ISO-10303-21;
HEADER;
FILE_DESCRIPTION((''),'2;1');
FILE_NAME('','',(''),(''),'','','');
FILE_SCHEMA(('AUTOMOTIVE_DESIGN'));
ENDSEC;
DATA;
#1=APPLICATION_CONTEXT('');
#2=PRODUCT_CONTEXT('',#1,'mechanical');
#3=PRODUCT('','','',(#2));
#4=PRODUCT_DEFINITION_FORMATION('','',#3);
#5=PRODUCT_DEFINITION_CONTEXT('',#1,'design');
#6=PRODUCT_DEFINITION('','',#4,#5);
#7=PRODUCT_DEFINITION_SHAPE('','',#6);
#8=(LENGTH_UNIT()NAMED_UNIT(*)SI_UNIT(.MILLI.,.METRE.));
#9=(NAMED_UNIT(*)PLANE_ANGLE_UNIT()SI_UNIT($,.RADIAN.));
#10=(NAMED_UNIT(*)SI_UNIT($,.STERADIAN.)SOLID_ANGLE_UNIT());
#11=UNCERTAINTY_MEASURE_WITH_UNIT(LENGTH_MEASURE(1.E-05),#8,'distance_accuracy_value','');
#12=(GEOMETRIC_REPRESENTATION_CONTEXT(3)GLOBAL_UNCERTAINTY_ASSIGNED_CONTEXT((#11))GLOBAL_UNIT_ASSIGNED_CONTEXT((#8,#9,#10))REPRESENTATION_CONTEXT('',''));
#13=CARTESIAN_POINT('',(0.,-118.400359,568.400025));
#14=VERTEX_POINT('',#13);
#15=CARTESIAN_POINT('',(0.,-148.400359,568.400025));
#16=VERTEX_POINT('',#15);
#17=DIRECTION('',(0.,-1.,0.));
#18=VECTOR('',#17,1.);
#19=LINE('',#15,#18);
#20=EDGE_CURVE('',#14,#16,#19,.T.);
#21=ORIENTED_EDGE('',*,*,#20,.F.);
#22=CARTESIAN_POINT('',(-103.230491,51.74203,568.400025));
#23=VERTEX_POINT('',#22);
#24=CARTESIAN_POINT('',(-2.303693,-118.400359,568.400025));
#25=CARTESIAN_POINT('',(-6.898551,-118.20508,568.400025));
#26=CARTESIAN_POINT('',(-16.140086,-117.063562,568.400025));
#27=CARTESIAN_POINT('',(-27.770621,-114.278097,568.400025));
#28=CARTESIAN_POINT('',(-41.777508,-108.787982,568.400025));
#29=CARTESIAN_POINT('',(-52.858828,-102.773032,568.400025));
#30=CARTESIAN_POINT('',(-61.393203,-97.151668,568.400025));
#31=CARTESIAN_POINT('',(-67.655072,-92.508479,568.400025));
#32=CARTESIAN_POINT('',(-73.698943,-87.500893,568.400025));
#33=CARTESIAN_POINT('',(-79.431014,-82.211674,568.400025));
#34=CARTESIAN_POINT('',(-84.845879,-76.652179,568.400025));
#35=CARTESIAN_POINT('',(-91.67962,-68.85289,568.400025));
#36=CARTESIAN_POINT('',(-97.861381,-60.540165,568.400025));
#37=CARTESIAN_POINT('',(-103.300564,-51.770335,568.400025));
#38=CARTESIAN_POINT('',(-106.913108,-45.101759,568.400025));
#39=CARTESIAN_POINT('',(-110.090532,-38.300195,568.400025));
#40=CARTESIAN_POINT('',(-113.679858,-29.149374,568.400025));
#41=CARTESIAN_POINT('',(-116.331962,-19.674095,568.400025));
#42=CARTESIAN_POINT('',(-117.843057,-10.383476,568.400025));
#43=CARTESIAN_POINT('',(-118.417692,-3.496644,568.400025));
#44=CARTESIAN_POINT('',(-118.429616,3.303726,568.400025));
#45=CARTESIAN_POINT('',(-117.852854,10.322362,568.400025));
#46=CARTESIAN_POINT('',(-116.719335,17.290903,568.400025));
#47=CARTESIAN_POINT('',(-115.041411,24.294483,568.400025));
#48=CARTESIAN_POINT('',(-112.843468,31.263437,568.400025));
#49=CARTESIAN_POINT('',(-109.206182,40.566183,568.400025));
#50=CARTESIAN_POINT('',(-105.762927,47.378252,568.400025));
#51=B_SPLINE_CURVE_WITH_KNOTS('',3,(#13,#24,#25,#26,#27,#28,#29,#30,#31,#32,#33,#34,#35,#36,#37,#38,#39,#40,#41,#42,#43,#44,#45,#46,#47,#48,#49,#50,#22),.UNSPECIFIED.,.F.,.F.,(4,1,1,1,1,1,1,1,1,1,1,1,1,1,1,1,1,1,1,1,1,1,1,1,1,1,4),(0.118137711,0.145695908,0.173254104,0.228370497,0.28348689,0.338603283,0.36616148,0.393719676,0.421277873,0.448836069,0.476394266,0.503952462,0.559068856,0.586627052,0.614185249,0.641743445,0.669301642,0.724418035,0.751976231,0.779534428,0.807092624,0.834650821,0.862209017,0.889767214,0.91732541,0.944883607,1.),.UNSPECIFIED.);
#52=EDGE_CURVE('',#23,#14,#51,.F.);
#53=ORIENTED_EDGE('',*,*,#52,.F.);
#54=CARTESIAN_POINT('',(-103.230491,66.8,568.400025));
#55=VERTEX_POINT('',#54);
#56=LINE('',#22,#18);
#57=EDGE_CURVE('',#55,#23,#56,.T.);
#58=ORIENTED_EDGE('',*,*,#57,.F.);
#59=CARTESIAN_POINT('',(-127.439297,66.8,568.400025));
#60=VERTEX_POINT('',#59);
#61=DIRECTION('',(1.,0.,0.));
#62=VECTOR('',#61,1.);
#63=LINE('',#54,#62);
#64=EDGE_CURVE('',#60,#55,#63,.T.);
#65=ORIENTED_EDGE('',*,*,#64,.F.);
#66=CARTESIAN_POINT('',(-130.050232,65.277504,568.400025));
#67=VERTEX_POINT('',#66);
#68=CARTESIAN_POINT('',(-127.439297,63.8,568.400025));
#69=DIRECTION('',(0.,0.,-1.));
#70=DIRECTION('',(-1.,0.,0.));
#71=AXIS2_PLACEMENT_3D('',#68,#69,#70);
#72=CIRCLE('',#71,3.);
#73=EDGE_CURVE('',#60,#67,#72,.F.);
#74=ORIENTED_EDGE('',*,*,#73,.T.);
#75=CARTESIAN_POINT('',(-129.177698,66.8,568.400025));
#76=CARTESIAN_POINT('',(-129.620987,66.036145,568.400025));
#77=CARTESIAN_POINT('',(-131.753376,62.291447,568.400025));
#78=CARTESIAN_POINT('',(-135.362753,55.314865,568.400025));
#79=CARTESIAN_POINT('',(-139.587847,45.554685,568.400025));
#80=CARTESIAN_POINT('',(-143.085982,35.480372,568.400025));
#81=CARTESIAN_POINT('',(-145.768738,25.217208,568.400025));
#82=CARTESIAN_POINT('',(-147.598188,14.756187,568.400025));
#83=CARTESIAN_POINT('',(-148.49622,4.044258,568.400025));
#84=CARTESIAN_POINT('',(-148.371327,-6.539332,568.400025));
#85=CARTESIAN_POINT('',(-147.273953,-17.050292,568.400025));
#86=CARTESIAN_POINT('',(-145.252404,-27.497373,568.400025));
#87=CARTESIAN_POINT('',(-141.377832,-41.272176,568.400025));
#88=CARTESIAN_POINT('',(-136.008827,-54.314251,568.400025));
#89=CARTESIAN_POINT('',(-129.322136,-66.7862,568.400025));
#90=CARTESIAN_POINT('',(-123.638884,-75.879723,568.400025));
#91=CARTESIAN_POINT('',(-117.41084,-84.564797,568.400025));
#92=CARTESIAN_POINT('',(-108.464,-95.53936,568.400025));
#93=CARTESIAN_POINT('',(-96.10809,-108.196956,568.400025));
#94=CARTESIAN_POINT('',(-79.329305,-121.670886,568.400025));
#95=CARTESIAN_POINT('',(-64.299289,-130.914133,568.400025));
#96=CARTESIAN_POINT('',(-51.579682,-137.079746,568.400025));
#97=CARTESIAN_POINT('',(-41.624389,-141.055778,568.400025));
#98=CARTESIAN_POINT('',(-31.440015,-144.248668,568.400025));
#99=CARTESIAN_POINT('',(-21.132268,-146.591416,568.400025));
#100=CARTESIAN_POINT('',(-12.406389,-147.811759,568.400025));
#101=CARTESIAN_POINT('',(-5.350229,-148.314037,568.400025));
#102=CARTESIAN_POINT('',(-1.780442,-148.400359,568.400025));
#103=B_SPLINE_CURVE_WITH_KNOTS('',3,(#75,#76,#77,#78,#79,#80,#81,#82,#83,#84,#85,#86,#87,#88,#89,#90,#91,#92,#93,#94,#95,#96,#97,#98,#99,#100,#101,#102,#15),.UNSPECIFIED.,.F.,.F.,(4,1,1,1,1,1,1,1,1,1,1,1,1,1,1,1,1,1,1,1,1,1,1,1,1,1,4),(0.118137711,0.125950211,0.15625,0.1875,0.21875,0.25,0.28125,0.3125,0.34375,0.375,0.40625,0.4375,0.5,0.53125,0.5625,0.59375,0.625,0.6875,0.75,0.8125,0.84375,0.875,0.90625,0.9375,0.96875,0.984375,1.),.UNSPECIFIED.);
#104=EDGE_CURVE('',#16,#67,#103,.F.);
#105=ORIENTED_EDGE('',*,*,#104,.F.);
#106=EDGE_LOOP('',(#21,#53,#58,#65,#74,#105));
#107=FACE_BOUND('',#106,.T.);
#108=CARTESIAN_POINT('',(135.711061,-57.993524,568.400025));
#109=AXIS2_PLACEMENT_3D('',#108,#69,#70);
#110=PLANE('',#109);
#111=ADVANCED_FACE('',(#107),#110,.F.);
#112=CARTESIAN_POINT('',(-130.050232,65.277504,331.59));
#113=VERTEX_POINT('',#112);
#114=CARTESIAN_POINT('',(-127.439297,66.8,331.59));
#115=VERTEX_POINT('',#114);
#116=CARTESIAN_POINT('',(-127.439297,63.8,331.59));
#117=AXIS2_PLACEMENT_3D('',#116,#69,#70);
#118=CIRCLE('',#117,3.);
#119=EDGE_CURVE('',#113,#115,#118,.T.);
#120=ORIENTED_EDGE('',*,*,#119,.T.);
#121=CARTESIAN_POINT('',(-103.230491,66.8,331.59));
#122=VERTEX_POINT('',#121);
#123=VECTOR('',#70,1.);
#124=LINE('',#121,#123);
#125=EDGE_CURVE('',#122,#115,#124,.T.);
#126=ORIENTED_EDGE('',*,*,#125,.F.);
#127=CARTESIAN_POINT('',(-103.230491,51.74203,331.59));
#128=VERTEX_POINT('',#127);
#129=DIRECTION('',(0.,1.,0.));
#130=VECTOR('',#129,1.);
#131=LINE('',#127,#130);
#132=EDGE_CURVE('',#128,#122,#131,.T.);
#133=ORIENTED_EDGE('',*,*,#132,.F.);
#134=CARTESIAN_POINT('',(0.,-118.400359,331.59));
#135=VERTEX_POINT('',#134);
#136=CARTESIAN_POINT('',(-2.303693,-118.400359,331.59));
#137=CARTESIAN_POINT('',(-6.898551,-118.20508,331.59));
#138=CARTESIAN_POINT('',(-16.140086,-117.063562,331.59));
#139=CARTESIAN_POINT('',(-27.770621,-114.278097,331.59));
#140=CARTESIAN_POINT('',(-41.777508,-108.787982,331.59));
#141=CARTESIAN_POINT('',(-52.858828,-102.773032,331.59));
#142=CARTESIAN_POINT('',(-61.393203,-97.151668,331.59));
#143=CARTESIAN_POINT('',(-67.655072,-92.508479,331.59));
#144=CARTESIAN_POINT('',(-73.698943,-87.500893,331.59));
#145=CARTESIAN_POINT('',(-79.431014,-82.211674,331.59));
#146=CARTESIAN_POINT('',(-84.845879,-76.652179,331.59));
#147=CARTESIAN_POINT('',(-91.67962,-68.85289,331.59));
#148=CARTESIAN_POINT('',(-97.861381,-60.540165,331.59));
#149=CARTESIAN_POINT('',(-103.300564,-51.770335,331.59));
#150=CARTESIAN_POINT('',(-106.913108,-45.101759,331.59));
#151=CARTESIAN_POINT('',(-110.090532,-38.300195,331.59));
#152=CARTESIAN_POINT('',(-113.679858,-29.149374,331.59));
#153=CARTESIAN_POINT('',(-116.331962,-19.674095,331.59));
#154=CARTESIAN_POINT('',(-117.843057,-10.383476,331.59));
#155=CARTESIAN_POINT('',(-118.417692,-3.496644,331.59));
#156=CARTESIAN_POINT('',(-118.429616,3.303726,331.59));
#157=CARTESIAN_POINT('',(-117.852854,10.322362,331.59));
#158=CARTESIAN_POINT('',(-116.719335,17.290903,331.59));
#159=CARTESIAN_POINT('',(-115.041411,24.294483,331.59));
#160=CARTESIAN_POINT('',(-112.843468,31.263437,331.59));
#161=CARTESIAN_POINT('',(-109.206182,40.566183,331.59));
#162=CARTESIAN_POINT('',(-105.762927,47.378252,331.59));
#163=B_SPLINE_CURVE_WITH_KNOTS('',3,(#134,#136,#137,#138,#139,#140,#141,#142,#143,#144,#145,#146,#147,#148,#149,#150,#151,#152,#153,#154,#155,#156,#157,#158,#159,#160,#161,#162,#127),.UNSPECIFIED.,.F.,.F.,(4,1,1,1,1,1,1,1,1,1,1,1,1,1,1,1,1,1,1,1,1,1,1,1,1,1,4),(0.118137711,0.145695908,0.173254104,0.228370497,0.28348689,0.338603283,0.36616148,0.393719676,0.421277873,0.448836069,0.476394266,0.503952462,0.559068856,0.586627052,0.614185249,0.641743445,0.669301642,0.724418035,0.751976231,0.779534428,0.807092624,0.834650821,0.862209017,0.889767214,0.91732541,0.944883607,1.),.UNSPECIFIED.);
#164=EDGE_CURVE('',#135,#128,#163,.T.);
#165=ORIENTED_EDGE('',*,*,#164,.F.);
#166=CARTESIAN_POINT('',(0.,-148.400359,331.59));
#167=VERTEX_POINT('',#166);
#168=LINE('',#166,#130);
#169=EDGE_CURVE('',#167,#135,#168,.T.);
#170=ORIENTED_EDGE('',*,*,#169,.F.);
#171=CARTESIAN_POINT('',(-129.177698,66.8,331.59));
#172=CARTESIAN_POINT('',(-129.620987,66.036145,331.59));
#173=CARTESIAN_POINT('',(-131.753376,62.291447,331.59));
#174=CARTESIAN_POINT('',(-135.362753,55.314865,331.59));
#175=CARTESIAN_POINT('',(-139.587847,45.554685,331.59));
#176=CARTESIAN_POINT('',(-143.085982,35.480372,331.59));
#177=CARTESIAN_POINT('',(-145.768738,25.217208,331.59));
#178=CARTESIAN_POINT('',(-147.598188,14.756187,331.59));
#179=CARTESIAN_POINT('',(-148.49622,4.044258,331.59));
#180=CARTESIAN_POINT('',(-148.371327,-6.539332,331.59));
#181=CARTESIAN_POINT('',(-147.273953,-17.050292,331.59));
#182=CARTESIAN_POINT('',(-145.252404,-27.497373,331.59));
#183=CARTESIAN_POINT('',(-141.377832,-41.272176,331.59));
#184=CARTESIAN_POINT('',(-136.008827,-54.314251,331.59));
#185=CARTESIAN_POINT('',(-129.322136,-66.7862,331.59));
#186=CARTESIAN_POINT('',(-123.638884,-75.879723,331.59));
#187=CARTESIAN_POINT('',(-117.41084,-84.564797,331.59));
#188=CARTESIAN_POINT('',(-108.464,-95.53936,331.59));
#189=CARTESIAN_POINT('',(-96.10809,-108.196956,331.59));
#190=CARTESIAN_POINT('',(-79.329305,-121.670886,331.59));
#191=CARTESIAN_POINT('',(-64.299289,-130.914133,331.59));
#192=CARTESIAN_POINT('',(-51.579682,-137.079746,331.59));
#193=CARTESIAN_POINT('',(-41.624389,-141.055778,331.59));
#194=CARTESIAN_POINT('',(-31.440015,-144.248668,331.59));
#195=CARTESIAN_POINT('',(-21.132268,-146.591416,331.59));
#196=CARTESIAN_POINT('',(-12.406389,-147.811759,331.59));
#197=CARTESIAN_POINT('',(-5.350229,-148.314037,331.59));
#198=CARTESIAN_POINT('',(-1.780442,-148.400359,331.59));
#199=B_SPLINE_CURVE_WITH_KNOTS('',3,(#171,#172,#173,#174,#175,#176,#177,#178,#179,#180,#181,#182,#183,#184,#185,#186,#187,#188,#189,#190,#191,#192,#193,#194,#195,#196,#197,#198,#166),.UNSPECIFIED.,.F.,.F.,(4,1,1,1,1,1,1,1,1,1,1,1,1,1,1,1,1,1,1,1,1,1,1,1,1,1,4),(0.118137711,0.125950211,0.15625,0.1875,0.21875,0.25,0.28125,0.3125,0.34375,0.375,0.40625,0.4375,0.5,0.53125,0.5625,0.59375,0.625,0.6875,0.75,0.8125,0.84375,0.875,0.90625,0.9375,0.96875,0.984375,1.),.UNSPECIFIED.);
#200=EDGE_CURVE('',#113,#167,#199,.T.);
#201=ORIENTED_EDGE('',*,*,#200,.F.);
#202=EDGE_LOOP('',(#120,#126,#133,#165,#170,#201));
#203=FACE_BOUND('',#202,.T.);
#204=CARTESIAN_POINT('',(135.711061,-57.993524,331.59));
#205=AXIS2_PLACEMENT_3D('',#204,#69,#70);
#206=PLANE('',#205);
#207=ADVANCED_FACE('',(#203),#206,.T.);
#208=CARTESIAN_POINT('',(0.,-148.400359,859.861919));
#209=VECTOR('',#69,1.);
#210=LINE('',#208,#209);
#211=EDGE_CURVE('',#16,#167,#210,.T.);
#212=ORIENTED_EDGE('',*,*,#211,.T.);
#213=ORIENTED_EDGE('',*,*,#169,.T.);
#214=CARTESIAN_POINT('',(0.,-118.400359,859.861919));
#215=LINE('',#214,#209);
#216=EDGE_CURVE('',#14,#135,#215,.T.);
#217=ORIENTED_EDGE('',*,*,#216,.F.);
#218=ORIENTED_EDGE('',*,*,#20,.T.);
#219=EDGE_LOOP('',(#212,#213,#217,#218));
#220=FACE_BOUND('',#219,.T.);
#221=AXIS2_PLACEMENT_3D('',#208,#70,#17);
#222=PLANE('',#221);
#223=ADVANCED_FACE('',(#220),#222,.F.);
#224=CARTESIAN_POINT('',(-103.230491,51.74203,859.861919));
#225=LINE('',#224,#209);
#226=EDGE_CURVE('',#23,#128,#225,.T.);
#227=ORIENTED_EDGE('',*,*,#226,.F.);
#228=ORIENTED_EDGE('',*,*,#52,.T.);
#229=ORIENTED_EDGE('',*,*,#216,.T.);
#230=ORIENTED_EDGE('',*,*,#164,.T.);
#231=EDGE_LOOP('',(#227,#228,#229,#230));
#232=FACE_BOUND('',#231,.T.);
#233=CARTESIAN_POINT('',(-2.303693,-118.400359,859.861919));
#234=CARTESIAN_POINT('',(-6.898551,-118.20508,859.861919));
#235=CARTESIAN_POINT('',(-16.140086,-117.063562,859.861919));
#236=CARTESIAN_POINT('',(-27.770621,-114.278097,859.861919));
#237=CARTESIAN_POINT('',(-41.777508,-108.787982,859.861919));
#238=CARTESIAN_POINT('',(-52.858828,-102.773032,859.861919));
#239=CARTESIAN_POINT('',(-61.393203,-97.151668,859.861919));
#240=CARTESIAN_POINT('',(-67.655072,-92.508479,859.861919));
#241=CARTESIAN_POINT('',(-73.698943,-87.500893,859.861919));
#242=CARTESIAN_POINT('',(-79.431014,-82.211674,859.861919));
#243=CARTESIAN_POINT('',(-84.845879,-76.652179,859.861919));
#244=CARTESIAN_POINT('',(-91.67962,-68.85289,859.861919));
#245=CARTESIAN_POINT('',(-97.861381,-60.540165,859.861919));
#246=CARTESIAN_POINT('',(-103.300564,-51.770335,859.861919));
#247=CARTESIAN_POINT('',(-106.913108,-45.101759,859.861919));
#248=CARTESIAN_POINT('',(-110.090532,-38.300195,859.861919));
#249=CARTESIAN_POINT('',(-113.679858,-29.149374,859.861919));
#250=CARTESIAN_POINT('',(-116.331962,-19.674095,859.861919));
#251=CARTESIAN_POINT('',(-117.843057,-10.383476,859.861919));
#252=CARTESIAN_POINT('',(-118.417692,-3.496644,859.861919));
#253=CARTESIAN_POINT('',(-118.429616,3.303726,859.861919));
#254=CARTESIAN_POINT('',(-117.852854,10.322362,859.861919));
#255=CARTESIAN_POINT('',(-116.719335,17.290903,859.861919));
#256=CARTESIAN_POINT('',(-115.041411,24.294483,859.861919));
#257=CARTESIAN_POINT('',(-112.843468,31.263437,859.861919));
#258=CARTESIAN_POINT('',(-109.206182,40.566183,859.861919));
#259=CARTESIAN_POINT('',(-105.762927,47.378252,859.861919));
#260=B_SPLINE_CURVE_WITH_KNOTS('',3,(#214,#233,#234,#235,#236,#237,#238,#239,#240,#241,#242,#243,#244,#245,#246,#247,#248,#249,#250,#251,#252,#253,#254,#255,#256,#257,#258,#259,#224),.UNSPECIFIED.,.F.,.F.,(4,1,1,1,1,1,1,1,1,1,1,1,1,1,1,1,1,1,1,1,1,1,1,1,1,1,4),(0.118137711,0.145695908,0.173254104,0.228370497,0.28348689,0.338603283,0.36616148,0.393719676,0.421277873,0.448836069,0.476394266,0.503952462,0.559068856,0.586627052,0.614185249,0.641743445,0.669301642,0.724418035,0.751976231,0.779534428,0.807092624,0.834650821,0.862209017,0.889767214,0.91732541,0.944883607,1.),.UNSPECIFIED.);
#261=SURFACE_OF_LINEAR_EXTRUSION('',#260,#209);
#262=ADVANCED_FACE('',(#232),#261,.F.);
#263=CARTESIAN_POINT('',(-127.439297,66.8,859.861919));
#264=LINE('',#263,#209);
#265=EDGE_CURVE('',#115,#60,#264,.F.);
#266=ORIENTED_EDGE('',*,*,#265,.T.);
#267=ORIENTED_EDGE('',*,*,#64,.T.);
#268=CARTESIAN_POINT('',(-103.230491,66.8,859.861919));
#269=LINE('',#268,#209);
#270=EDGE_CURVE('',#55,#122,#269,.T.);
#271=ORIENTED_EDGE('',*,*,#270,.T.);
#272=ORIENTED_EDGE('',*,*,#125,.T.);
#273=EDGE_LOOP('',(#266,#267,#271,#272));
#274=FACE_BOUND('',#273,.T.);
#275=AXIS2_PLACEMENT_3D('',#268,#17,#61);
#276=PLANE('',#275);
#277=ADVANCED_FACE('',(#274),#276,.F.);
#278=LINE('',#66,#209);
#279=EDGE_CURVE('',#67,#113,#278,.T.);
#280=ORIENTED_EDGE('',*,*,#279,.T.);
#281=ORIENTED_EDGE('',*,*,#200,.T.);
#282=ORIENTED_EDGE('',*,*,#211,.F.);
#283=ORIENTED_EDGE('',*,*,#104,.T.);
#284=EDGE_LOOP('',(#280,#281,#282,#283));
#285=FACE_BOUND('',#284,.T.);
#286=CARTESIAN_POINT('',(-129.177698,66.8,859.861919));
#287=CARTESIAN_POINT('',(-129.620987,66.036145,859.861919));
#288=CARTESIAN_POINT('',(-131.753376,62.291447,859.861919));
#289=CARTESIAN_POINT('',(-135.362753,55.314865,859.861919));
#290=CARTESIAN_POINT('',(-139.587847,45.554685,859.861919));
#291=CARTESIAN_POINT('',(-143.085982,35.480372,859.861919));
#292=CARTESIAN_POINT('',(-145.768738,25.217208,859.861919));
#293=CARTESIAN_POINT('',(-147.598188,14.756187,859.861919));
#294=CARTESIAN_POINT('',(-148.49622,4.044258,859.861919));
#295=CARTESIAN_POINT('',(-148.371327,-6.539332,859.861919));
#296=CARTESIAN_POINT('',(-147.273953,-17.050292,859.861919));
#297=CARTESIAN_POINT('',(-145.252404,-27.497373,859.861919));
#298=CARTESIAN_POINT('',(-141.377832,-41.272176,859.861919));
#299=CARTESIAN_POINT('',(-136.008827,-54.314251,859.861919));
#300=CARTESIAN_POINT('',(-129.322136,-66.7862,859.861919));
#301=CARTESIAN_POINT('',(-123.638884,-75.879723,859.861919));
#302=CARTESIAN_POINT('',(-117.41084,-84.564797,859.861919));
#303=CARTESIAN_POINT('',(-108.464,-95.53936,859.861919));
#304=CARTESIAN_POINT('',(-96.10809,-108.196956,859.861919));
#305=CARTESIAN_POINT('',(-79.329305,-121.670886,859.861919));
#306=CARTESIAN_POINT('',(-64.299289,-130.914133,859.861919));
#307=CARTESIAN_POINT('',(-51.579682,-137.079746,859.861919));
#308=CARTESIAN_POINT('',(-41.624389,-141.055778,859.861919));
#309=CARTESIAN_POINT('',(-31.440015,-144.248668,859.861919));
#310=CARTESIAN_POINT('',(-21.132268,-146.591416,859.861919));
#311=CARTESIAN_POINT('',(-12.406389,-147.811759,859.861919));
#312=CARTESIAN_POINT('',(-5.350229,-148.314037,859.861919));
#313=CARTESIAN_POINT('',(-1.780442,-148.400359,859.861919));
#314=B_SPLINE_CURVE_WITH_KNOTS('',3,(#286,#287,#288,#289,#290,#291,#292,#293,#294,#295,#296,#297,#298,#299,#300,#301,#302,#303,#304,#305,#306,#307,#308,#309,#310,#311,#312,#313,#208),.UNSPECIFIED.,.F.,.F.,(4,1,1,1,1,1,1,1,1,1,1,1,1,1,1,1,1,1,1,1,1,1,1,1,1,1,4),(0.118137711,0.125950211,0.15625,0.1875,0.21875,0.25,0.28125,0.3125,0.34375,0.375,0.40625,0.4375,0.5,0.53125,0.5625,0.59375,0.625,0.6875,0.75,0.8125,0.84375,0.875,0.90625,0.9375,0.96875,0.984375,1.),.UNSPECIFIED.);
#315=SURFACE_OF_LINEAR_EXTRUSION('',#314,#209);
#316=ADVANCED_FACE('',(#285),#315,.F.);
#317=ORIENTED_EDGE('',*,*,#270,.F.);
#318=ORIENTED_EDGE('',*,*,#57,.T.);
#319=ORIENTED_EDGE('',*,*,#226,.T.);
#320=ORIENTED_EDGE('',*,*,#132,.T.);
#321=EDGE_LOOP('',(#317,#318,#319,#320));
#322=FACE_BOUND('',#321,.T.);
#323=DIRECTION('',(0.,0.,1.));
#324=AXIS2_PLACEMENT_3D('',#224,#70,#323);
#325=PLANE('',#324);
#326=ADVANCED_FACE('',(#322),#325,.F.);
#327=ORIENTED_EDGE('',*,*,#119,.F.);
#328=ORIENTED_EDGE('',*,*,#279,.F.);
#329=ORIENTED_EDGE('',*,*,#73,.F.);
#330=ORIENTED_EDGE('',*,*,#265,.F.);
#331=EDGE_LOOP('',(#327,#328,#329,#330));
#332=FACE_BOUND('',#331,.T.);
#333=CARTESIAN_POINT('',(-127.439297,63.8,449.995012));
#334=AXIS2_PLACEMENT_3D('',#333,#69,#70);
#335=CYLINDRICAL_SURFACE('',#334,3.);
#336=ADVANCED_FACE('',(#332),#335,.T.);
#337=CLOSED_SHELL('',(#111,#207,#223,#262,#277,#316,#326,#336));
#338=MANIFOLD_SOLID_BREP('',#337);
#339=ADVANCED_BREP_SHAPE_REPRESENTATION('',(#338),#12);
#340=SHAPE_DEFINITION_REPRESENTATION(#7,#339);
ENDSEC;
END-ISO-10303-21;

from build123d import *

# Parameters (mm, degrees)
STOCK_PAYLOAD_BAY_1_START = 331.59
STOCK_PAYLOAD_BAY_1_DEPTH = 236.810025
FILLET1_R                 = 3


# Read off the part's stored shape, not the designer's step: Stock-Payload_bay-1
with BuildPart() as part:
    # Stock-Payload_bay-1 outline → Stock-Payload_bay-1 (new body)
    with BuildSketch(Plane.XY.offset(STOCK_PAYLOAD_BAY_1_START)):
        with BuildLine():
            Line((-103.230490722, 66.8), (-129.177697638, 66.8))
            add(Edge.make_bspline(
                [(-129.177697638, 66.8), (-129.620986666, 66.036144557), (-131.753376368, 62.291446965), (-135.362753212, 55.314865151), (-139.587846981, 45.554685292), (-143.085982258, 35.480371977), (-145.768738443, 25.217208127), (-147.598187785, 14.756187222), (-148.496219867, 4.04425788), (-148.371326584, -6.539331808), (-147.273953028, -17.050292148), (-145.252404256, -27.49737261), (-141.377832301, -41.272176246), (-136.008827451, -54.314250652), (-129.322136126, -66.786199843), (-123.638884314, -75.879723374), (-117.410839628, -84.564797072), (-108.463999756, -95.539360338), (-96.108090183, -108.196956109), (-79.329305457, -121.670886231), (-64.299288616, -130.914132781), (-51.579681827, -137.079745612), (-41.624388524, -141.055777896), (-31.440015392, -144.248668387), (-21.132268456, -146.591416073), (-12.406389282, -147.811759094), (-5.350229412, -148.314037414), (-1.78044168, -148.400358856), (0, -148.400358856)],
                knots=[0.118137711, 0.118137711, 0.118137711, 0.118137711, 0.125950211, 0.15625, 0.1875, 0.21875, 0.25, 0.28125, 0.3125, 0.34375, 0.375, 0.40625, 0.4375, 0.5, 0.53125, 0.5625, 0.59375, 0.625, 0.6875, 0.75, 0.8125, 0.84375, 0.875, 0.90625, 0.9375, 0.96875, 0.984375, 1, 1, 1, 1], degree=3))
            Line((0, -148.400358856), (0, -118.400358856))
            add(Edge.make_bspline(
                [(0, -118.400358856), (-2.303693392, -118.400358856), (-6.898551381, -118.2050796), (-16.140086281, -117.063562247), (-27.770620909, -114.278096666), (-41.777508235, -108.787982079), (-52.858828085, -102.773031903), (-61.393202724, -97.151668291), (-67.655072466, -92.508478947), (-73.698942945, -87.500892571), (-79.431014325, -82.211674373), (-84.845879459, -76.652178794), (-91.679619901, -68.852889603), (-97.861381013, -60.540164894), (-103.300564171, -51.770334803), (-106.913108194, -45.10175935), (-110.090532471, -38.300194601), (-113.679857665, -29.149374039), (-116.331962276, -19.674094756), (-117.84305713, -10.383476032), (-118.417692188, -3.496644211), (-118.429616299, 3.303725764), (-117.852853719, 10.322362118), (-116.719335417, 17.290902684), (-115.041411044, 24.294482859), (-112.843468002, 31.263436572), (-109.206181561, 40.566182867), (-105.762926527, 47.378252328), (-103.230490722, 51.742030241)],
                knots=[0.118137711, 0.118137711, 0.118137711, 0.118137711, 0.145695908, 0.173254104, 0.228370497, 0.28348689, 0.338603283, 0.36616148, 0.393719676, 0.421277873, 0.448836069, 0.476394266, 0.503952462, 0.559068856, 0.586627052, 0.614185249, 0.641743445, 0.669301642, 0.724418035, 0.751976231, 0.779534428, 0.807092624, 0.834650821, 0.862209017, 0.889767214, 0.91732541, 0.944883607, 1, 1, 1, 1], degree=3))
            Line((-103.230490722, 51.742030241), (-103.230490722, 66.8))
        make_face()
    extrude(amount=STOCK_PAYLOAD_BAY_1_DEPTH)

    # Fillet1
    fillet1_edges = [part.edges().sort_by_distance(p)[0] for p in [
        (-129.177697638, 66.8, 449.9950125),
    ]]
    fillet(fillet1_edges, radius=FILLET1_R)


solid = part.part
